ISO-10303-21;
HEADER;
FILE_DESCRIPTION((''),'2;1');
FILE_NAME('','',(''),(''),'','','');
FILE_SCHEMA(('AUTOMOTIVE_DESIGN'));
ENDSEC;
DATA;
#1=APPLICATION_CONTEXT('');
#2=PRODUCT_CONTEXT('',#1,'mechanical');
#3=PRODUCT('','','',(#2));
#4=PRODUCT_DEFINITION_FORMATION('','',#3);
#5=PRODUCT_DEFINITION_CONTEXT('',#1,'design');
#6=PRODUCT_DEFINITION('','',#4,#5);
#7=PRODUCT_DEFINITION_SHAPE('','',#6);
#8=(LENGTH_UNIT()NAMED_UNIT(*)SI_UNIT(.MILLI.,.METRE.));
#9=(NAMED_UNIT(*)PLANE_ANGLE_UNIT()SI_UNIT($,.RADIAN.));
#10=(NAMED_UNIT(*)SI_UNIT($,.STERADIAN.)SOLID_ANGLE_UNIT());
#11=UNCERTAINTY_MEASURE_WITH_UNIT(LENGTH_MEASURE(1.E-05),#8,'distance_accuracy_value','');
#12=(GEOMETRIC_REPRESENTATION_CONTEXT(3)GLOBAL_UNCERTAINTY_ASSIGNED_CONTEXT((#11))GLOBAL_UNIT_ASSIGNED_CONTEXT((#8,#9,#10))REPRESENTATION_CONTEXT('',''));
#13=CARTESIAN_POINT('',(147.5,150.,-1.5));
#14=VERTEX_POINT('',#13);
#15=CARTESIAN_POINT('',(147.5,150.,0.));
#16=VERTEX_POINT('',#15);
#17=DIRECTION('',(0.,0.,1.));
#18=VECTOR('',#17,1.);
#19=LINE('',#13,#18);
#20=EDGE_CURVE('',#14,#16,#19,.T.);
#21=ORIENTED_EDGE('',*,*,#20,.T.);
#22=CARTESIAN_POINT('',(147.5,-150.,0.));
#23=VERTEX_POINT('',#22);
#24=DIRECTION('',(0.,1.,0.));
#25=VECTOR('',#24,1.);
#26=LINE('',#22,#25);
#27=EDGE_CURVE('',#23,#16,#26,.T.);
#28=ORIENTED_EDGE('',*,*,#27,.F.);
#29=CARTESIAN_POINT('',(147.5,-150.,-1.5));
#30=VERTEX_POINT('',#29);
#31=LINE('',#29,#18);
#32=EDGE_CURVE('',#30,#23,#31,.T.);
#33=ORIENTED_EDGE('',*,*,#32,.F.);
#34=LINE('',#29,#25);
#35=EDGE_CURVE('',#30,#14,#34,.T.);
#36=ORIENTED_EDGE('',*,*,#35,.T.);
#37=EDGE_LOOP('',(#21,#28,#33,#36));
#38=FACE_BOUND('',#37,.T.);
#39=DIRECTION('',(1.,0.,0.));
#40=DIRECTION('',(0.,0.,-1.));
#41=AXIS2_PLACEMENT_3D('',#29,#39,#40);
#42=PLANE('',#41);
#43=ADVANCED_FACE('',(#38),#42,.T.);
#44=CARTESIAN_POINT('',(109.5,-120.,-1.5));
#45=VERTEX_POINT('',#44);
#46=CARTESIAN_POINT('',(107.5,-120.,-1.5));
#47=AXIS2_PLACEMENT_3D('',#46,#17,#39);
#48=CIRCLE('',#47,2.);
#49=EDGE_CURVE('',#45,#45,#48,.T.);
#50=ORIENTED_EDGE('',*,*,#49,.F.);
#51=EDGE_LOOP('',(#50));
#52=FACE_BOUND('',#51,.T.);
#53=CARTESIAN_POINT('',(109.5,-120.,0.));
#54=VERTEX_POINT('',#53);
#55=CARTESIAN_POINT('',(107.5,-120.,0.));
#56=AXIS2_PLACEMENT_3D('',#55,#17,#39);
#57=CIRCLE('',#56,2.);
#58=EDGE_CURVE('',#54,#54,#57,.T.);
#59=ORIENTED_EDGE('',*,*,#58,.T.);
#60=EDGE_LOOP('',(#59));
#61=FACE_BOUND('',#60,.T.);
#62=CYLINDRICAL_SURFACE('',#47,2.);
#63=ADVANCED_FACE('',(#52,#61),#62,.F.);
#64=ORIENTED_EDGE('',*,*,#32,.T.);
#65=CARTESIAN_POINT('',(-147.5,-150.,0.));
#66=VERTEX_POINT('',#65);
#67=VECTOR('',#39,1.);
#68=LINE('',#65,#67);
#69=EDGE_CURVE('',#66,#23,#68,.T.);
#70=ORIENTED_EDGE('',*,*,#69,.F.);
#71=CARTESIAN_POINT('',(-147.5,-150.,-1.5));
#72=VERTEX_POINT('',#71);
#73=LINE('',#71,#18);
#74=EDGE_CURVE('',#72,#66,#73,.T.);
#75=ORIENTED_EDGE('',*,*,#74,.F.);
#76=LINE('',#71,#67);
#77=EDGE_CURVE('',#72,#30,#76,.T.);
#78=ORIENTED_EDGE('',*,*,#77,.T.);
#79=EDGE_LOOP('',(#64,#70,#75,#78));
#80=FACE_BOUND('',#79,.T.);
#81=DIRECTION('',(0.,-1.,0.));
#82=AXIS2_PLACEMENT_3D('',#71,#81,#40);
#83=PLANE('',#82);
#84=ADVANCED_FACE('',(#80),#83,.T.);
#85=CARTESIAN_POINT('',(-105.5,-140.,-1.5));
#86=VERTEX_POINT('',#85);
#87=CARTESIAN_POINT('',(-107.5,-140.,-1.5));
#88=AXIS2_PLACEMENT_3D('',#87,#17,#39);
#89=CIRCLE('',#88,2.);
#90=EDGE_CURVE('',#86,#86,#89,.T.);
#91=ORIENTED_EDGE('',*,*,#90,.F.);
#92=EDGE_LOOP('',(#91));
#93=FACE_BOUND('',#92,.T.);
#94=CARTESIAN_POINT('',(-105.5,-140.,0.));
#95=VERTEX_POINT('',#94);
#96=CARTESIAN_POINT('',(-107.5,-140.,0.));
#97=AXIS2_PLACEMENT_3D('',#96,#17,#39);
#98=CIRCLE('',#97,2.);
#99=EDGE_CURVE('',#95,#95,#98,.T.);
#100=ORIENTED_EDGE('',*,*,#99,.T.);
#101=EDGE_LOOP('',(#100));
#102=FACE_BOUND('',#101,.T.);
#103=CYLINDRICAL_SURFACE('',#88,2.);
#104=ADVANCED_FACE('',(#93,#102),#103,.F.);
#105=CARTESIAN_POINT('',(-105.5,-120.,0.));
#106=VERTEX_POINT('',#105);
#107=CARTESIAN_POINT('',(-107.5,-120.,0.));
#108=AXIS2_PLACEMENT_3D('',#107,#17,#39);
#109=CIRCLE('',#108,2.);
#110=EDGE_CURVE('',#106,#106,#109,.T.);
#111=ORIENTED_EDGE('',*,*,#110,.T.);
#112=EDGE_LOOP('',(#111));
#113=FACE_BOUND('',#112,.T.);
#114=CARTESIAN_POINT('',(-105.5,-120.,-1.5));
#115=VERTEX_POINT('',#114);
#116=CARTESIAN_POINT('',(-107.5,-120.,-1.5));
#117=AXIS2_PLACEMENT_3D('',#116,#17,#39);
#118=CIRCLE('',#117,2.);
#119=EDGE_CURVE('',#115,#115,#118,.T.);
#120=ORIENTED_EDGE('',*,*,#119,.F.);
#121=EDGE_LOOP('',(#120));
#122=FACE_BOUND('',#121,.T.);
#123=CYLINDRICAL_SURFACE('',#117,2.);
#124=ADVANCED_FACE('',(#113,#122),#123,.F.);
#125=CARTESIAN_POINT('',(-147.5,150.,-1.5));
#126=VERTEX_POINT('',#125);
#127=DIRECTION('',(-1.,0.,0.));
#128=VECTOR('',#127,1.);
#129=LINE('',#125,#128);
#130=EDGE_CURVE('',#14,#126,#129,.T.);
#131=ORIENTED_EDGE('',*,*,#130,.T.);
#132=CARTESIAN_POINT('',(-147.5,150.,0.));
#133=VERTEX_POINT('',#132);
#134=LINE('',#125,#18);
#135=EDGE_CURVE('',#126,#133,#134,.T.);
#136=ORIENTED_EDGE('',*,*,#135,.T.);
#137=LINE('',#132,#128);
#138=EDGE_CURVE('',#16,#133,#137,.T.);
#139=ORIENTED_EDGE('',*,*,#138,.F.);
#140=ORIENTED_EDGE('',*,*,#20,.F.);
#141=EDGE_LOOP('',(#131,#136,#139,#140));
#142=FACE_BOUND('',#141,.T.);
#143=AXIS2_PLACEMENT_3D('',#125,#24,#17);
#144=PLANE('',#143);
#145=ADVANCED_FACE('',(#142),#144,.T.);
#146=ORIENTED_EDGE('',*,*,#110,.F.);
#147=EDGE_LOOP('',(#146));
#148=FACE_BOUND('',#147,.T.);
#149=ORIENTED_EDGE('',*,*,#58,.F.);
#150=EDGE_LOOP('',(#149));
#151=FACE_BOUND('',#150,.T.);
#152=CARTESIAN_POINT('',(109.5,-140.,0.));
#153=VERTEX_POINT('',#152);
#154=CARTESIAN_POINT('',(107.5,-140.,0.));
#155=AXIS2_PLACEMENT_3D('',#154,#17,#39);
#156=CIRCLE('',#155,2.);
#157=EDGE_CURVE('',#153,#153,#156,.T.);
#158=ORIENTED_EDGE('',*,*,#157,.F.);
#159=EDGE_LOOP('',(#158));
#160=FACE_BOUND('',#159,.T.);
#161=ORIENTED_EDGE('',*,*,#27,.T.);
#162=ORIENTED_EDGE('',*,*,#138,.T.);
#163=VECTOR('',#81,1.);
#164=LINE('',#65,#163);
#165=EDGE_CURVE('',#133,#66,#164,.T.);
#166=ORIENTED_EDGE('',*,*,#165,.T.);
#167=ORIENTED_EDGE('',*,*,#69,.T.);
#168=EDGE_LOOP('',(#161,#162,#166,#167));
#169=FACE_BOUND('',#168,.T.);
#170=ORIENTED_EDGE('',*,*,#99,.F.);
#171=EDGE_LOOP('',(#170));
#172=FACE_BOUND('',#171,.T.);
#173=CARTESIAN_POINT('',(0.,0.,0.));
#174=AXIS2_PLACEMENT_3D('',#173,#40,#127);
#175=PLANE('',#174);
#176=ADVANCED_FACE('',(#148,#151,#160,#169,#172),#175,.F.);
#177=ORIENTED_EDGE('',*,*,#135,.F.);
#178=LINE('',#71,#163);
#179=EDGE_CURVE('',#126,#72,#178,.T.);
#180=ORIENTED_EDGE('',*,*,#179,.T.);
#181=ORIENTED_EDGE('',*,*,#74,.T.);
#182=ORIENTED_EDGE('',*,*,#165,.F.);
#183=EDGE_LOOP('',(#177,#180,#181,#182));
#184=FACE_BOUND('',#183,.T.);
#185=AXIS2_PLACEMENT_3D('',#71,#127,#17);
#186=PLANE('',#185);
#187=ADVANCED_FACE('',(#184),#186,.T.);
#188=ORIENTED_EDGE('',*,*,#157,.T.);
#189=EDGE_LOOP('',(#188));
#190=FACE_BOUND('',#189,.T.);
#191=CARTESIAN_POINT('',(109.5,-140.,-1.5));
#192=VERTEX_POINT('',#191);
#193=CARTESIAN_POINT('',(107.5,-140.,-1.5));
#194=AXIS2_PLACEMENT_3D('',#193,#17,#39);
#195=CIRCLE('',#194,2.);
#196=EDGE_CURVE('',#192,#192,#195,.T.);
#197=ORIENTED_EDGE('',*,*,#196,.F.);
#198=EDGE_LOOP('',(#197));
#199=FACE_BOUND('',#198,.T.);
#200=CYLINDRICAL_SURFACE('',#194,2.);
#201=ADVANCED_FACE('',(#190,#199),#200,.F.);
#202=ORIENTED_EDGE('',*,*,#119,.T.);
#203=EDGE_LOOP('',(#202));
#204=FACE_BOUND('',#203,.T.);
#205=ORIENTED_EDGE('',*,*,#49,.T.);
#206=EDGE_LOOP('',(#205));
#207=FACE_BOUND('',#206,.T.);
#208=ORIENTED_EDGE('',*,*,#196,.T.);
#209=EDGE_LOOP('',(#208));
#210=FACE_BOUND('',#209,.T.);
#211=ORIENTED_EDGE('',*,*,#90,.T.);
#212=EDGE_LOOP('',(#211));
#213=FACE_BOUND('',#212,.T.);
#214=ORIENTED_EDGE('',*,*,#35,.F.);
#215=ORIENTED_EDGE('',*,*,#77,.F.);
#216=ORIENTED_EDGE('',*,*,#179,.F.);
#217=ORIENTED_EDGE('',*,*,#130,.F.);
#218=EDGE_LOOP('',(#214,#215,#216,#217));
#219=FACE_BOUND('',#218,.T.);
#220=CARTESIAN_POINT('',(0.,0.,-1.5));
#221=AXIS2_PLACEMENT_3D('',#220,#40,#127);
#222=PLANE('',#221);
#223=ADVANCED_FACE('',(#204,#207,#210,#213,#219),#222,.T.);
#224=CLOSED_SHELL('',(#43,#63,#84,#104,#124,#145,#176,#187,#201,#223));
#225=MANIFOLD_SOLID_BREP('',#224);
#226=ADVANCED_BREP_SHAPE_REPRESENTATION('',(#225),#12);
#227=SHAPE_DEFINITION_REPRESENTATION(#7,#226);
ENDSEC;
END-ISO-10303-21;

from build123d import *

# Parameters (mm, degrees)
SKETCH_1_W             = 295
SKETCH_1_H             = 300
SKETCH_1_R             = 2
SM_BASE_FLANGE_1_DEPTH = 1.5


# Sheet-metal steps are written as plain solids
with BuildPart() as part:
    # Sketch 1 → 基体-法兰1 (new body)
    with BuildSketch(Plane.XY):
        Rectangle(SKETCH_1_W, SKETCH_1_H)
        with Locations((107.5, -140)):
            Circle(SKETCH_1_R, mode=Mode.SUBTRACT)
        with Locations((107.5, -120)):
            Circle(SKETCH_1_R, mode=Mode.SUBTRACT)
        with Locations((-107.5, -120)):
            Circle(SKETCH_1_R, mode=Mode.SUBTRACT)
        with Locations((-107.5, -140)):
            Circle(SKETCH_1_R, mode=Mode.SUBTRACT)
    extrude(amount=-SM_BASE_FLANGE_1_DEPTH)


solid = part.part
